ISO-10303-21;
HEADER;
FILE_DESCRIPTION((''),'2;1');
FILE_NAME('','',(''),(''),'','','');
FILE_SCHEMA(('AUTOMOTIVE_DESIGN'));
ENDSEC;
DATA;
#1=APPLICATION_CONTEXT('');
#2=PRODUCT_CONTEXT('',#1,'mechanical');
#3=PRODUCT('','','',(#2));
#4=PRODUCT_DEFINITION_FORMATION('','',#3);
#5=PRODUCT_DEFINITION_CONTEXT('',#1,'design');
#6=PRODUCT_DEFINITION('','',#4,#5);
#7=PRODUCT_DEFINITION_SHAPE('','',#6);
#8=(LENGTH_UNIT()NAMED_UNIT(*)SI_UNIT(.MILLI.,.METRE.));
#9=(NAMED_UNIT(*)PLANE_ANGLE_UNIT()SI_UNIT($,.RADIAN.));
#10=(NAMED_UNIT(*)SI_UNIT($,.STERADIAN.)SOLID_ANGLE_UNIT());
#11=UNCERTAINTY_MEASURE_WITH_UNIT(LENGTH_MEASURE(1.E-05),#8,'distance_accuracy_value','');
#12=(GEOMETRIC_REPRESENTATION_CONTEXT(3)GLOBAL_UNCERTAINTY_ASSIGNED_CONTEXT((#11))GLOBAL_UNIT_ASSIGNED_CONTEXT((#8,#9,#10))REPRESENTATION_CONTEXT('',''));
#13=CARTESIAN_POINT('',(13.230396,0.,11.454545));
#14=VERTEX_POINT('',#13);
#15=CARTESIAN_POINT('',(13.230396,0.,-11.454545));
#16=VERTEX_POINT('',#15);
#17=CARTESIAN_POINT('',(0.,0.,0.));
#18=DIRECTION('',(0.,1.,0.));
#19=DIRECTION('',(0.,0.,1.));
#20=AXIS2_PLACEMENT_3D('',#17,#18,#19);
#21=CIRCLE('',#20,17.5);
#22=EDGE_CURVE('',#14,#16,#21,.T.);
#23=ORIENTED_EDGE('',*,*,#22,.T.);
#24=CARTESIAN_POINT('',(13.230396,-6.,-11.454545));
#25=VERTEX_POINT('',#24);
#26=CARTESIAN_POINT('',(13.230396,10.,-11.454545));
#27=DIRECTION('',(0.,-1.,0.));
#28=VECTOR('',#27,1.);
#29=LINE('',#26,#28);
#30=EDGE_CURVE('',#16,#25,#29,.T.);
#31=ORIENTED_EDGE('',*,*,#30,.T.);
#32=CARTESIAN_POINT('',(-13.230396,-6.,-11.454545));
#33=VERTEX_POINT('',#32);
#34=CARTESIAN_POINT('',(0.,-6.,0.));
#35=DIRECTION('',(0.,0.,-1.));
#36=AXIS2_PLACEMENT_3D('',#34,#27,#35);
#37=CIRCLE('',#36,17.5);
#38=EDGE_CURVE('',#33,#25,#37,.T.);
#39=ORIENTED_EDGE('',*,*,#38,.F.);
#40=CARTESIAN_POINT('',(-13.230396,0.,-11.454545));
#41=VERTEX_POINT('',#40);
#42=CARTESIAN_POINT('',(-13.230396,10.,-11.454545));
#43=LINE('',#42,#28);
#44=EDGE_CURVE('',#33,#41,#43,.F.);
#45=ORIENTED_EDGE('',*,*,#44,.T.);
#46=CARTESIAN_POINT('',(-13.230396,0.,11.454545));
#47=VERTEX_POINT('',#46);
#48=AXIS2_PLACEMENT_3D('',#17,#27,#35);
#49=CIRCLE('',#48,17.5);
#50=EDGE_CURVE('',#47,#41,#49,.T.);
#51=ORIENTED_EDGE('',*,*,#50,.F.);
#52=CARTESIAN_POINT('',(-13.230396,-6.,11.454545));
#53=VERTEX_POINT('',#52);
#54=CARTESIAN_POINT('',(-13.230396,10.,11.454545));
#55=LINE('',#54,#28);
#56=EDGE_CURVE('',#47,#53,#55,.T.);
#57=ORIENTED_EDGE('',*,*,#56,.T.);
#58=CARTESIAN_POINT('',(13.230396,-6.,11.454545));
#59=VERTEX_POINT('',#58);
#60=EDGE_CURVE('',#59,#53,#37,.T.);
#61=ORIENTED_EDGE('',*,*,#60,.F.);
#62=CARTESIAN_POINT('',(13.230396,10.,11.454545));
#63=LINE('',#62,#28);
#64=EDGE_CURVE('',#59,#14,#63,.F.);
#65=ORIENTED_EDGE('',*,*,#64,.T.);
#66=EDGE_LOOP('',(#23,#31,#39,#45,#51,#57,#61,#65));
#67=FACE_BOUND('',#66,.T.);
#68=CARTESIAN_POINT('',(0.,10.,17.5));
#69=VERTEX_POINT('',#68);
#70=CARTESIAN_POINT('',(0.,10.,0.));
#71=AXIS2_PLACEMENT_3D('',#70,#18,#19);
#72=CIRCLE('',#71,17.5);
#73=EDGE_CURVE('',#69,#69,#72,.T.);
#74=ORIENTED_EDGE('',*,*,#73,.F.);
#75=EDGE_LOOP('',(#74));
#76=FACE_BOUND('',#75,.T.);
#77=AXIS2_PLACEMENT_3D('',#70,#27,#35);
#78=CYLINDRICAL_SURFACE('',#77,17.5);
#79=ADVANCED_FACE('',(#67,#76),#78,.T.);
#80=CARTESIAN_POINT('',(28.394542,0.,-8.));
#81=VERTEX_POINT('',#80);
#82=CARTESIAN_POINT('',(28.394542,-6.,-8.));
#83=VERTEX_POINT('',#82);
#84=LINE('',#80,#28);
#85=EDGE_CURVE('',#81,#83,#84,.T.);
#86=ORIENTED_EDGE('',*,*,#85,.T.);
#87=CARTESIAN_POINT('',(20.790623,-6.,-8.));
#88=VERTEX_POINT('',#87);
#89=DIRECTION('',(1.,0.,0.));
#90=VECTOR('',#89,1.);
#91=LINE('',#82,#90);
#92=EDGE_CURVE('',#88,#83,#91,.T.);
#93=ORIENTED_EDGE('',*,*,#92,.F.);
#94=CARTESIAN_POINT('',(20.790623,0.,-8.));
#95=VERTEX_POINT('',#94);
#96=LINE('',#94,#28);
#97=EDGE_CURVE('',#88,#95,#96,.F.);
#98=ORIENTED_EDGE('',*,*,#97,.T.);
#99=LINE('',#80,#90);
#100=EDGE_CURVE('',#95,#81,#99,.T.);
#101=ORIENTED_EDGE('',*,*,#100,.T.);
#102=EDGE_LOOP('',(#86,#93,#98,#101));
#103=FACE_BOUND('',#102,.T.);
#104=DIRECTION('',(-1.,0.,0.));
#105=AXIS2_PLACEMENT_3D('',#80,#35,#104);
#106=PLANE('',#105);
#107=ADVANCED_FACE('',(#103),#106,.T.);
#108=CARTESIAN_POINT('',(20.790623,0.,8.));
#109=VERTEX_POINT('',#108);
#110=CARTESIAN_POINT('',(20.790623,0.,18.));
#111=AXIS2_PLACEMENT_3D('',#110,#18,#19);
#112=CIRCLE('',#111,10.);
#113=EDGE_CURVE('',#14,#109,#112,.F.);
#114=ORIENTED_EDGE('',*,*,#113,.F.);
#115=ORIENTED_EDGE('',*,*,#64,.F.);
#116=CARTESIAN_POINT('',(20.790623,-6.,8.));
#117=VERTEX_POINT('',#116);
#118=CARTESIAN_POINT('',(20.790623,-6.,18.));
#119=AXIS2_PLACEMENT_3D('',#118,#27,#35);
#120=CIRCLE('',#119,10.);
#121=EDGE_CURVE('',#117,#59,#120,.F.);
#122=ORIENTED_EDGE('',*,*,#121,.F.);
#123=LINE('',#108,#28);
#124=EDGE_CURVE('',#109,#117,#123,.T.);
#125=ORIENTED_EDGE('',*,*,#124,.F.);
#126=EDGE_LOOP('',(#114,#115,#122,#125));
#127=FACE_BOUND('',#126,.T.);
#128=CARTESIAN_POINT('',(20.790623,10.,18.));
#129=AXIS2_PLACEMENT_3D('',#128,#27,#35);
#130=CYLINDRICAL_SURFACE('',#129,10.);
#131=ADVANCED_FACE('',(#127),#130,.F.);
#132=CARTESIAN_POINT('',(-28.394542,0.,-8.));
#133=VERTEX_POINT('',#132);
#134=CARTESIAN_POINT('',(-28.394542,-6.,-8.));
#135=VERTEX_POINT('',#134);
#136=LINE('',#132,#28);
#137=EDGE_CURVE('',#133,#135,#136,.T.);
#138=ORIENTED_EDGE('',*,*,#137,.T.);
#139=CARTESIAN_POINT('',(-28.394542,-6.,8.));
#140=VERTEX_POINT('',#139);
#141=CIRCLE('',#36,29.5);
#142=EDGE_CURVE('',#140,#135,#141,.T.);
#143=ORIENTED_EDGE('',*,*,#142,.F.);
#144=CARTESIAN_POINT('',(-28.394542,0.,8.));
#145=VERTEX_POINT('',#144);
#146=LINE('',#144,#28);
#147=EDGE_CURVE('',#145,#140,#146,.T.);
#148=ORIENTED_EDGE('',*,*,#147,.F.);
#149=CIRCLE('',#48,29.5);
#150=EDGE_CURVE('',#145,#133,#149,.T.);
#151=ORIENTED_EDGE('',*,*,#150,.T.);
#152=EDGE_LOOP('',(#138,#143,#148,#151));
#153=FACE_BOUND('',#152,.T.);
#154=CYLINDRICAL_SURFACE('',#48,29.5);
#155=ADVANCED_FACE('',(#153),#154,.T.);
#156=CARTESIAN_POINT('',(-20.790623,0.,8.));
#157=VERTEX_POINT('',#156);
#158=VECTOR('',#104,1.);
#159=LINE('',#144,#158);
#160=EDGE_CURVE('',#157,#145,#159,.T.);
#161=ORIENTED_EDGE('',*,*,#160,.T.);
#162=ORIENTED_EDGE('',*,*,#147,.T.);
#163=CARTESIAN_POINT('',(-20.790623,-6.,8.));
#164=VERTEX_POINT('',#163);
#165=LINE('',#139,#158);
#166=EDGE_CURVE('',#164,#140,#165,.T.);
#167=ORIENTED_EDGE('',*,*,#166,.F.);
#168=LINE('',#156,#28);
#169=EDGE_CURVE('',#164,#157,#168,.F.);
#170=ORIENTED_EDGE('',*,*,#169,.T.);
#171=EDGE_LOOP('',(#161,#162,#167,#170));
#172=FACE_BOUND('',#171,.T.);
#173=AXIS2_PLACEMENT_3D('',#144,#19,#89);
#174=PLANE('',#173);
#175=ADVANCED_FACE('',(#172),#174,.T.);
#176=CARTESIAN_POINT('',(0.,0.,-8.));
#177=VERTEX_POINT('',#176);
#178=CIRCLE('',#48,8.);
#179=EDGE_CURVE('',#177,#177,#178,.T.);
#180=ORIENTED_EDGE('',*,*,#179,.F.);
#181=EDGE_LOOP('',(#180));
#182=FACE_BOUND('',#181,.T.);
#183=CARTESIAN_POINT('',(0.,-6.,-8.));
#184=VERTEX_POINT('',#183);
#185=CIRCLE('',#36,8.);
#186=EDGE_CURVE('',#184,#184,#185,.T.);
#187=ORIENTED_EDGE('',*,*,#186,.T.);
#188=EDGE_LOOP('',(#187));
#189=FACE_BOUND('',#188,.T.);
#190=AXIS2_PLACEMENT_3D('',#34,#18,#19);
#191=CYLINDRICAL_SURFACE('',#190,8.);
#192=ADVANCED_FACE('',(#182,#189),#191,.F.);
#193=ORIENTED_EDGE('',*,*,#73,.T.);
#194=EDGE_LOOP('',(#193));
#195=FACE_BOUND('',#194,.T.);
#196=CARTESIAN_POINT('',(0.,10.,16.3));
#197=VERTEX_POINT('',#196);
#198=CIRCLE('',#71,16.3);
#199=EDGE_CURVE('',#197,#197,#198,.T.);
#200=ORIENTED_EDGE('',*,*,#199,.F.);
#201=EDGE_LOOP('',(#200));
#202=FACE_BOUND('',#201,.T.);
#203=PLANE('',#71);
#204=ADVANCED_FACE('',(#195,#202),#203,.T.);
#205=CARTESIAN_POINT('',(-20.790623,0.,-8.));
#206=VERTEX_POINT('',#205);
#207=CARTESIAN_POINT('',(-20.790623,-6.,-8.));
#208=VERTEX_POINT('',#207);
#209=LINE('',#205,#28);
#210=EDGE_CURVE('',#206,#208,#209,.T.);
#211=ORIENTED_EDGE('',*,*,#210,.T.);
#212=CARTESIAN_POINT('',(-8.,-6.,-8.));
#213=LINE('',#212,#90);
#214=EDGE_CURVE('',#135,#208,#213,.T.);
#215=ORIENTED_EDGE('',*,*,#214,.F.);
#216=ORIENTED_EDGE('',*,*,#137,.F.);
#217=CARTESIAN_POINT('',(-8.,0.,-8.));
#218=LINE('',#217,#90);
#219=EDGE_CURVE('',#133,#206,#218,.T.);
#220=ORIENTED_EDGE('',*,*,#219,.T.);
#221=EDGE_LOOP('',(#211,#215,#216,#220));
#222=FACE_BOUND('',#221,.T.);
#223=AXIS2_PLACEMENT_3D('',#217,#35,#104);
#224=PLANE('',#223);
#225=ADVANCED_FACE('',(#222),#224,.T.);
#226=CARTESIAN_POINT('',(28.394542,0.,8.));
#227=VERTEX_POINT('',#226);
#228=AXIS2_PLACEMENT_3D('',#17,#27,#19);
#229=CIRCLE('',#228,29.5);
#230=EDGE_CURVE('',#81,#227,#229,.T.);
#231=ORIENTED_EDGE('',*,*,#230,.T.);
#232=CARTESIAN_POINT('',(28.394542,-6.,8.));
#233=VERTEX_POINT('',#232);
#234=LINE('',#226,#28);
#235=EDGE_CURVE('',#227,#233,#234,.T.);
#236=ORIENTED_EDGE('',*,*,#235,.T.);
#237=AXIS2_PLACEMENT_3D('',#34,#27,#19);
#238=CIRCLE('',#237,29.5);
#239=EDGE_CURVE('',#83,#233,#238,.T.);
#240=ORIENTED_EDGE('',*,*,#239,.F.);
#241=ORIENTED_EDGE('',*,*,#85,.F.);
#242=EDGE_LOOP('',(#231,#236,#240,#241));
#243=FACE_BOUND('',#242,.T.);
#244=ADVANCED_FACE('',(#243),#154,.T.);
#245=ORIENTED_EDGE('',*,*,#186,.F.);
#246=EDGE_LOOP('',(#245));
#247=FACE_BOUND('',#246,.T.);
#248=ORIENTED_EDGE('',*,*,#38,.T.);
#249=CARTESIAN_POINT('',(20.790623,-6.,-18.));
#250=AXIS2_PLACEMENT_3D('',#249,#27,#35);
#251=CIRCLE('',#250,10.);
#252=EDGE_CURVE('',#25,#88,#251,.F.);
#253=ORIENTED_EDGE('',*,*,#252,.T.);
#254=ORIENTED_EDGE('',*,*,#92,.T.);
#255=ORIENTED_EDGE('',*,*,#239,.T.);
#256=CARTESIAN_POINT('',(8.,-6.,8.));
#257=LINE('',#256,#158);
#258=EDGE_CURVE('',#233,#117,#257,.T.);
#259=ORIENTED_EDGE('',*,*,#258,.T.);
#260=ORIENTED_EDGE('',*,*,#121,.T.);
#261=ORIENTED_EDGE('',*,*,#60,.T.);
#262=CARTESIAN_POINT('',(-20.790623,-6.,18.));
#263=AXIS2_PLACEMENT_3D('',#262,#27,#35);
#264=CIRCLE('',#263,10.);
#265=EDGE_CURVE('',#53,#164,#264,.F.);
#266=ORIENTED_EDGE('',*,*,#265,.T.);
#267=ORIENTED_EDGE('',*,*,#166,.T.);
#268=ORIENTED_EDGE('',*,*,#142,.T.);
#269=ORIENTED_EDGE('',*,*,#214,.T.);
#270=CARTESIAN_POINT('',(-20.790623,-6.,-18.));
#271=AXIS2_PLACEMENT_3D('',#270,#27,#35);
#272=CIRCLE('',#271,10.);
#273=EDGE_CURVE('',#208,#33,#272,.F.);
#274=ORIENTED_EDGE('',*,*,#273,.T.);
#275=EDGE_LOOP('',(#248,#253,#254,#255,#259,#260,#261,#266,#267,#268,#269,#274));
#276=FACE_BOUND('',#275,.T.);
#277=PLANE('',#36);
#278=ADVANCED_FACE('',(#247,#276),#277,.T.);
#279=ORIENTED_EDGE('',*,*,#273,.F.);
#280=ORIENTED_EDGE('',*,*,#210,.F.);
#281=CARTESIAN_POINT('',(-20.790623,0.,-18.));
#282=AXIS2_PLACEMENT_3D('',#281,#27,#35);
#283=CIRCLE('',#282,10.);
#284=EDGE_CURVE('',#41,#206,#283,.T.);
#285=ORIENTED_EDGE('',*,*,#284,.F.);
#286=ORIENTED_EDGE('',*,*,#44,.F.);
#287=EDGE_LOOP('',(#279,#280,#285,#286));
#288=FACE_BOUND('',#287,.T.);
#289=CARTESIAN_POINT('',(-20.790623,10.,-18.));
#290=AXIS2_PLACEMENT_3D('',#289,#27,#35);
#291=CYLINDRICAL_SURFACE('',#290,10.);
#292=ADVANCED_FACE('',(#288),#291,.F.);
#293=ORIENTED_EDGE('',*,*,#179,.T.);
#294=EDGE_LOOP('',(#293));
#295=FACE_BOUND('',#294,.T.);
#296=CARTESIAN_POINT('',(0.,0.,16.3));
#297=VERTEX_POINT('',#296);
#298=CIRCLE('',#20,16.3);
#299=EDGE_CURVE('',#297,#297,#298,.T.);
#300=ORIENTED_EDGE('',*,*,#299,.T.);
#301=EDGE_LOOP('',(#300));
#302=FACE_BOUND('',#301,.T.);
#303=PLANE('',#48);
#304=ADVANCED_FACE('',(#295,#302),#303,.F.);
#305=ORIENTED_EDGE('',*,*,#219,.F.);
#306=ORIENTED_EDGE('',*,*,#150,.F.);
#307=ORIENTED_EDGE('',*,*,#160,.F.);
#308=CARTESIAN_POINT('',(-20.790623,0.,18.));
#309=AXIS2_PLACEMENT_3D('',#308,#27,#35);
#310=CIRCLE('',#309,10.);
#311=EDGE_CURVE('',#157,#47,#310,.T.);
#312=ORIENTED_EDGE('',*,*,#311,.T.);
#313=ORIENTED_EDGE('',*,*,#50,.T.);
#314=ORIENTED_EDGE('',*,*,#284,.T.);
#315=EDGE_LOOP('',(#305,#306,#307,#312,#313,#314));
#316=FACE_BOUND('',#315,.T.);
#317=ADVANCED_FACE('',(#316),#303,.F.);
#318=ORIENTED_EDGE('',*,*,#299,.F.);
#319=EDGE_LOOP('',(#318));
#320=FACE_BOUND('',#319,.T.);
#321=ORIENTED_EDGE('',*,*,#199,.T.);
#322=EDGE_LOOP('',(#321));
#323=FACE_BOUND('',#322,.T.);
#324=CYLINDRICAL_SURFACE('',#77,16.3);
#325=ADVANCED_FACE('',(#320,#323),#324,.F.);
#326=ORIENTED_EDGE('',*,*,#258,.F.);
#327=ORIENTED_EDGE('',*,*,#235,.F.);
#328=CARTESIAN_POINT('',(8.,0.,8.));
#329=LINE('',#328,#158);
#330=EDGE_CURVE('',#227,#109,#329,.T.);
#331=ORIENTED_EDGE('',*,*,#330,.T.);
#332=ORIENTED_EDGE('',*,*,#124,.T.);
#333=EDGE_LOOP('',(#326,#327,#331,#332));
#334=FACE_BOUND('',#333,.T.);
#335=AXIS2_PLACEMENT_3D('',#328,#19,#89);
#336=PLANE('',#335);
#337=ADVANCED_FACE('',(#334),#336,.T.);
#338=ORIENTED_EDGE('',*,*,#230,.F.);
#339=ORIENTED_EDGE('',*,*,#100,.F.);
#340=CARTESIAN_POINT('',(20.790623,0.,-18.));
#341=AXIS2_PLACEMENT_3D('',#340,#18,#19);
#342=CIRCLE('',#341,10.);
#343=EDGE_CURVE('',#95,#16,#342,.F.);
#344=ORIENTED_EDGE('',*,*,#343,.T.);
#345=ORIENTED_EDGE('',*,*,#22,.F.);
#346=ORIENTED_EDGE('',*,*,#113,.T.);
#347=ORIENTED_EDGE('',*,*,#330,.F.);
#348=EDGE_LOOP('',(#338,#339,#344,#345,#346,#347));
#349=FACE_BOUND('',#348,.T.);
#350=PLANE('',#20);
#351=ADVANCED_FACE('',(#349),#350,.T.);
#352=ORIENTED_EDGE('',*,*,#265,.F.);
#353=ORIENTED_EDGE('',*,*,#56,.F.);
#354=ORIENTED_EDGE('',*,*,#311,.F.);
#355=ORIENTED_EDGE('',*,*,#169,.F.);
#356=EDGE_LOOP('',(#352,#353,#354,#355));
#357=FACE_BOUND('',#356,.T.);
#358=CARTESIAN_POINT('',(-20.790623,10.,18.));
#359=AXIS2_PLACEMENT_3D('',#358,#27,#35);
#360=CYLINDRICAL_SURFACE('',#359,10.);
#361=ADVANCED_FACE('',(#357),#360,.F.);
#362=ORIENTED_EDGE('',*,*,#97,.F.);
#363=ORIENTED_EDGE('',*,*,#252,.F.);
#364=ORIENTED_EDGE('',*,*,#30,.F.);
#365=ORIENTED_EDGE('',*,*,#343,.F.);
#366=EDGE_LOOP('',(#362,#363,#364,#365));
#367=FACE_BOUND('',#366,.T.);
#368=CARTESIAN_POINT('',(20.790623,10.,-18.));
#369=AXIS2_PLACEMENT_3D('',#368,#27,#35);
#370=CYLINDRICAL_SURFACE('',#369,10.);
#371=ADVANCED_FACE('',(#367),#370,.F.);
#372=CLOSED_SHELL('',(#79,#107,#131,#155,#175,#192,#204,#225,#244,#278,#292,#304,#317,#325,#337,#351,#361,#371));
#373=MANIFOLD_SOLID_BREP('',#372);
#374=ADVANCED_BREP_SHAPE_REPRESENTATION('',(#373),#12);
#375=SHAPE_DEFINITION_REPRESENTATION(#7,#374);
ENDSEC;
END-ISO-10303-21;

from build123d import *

# Parameters (mm, degrees)
SKETCH1_R           = 17.5
SKETCH1_R_2         = 16.3
BOSS_EXTRUDE1_DEPTH = 10
BOSS_EXTRUDE2_START = 6
SKETCH2_R           = 17.5
SKETCH2_R_2         = 8
BOSS_EXTRUDE2_DEPTH = 6
BOSS_EXTRUDE3_DEPTH = 6
FILLET1_R           = 10


with BuildPart() as part:
    # Sketch1 → Boss-Extrude1 (new body)
    with BuildSketch(Plane(origin=(0, 0, 0), x_dir=(1, 0, 0), z_dir=(0, 1, 0))):
        Circle(SKETCH1_R)
        Circle(SKETCH1_R_2, mode=Mode.SUBTRACT)
    extrude(amount=BOSS_EXTRUDE1_DEPTH)

    # Sketch2 → Boss-Extrude2 (add)
    with BuildSketch(Plane.XZ.offset(BOSS_EXTRUDE2_START)):
        Circle(SKETCH2_R)
        Circle(SKETCH2_R_2, mode=Mode.SUBTRACT)
    extrude(amount=-BOSS_EXTRUDE2_DEPTH)

    # Sketch4 → Boss-Extrude3 (add)
    with BuildSketch(Plane.XZ.offset(6)):
        with BuildLine():
            Line((-28.394541729, 8), (-8, 8))
            Line((-8, 8), (-8, -8))
            Line((-8, -8), (-28.394541729, -8))
            ThreePointArc((-28.394541729, -8), (-29.5, 0), (-28.394541729, 8))
        make_face()
        with BuildLine():
            Line((28.394541729, -8), (8, -8))
            Line((8, -8), (8, 8))
            Line((8, 8), (28.394541729, 8))
            ThreePointArc((28.394541729, 8), (29.5, 0), (28.394541729, -8))
        make_face()
    extrude(amount=-BOSS_EXTRUDE3_DEPTH)

    # Fillet1
    fillet1_edges = [part.edges().sort_by_distance(p)[0] for p in [
        (15.564382416, -3, -8),
        (15.564382416, -3, 8),
        (-15.564382416, -3, -8),
        (-15.564382416, -3, 8),
    ]]
    fillet(fillet1_edges, radius=FILLET1_R)


solid = part.part
